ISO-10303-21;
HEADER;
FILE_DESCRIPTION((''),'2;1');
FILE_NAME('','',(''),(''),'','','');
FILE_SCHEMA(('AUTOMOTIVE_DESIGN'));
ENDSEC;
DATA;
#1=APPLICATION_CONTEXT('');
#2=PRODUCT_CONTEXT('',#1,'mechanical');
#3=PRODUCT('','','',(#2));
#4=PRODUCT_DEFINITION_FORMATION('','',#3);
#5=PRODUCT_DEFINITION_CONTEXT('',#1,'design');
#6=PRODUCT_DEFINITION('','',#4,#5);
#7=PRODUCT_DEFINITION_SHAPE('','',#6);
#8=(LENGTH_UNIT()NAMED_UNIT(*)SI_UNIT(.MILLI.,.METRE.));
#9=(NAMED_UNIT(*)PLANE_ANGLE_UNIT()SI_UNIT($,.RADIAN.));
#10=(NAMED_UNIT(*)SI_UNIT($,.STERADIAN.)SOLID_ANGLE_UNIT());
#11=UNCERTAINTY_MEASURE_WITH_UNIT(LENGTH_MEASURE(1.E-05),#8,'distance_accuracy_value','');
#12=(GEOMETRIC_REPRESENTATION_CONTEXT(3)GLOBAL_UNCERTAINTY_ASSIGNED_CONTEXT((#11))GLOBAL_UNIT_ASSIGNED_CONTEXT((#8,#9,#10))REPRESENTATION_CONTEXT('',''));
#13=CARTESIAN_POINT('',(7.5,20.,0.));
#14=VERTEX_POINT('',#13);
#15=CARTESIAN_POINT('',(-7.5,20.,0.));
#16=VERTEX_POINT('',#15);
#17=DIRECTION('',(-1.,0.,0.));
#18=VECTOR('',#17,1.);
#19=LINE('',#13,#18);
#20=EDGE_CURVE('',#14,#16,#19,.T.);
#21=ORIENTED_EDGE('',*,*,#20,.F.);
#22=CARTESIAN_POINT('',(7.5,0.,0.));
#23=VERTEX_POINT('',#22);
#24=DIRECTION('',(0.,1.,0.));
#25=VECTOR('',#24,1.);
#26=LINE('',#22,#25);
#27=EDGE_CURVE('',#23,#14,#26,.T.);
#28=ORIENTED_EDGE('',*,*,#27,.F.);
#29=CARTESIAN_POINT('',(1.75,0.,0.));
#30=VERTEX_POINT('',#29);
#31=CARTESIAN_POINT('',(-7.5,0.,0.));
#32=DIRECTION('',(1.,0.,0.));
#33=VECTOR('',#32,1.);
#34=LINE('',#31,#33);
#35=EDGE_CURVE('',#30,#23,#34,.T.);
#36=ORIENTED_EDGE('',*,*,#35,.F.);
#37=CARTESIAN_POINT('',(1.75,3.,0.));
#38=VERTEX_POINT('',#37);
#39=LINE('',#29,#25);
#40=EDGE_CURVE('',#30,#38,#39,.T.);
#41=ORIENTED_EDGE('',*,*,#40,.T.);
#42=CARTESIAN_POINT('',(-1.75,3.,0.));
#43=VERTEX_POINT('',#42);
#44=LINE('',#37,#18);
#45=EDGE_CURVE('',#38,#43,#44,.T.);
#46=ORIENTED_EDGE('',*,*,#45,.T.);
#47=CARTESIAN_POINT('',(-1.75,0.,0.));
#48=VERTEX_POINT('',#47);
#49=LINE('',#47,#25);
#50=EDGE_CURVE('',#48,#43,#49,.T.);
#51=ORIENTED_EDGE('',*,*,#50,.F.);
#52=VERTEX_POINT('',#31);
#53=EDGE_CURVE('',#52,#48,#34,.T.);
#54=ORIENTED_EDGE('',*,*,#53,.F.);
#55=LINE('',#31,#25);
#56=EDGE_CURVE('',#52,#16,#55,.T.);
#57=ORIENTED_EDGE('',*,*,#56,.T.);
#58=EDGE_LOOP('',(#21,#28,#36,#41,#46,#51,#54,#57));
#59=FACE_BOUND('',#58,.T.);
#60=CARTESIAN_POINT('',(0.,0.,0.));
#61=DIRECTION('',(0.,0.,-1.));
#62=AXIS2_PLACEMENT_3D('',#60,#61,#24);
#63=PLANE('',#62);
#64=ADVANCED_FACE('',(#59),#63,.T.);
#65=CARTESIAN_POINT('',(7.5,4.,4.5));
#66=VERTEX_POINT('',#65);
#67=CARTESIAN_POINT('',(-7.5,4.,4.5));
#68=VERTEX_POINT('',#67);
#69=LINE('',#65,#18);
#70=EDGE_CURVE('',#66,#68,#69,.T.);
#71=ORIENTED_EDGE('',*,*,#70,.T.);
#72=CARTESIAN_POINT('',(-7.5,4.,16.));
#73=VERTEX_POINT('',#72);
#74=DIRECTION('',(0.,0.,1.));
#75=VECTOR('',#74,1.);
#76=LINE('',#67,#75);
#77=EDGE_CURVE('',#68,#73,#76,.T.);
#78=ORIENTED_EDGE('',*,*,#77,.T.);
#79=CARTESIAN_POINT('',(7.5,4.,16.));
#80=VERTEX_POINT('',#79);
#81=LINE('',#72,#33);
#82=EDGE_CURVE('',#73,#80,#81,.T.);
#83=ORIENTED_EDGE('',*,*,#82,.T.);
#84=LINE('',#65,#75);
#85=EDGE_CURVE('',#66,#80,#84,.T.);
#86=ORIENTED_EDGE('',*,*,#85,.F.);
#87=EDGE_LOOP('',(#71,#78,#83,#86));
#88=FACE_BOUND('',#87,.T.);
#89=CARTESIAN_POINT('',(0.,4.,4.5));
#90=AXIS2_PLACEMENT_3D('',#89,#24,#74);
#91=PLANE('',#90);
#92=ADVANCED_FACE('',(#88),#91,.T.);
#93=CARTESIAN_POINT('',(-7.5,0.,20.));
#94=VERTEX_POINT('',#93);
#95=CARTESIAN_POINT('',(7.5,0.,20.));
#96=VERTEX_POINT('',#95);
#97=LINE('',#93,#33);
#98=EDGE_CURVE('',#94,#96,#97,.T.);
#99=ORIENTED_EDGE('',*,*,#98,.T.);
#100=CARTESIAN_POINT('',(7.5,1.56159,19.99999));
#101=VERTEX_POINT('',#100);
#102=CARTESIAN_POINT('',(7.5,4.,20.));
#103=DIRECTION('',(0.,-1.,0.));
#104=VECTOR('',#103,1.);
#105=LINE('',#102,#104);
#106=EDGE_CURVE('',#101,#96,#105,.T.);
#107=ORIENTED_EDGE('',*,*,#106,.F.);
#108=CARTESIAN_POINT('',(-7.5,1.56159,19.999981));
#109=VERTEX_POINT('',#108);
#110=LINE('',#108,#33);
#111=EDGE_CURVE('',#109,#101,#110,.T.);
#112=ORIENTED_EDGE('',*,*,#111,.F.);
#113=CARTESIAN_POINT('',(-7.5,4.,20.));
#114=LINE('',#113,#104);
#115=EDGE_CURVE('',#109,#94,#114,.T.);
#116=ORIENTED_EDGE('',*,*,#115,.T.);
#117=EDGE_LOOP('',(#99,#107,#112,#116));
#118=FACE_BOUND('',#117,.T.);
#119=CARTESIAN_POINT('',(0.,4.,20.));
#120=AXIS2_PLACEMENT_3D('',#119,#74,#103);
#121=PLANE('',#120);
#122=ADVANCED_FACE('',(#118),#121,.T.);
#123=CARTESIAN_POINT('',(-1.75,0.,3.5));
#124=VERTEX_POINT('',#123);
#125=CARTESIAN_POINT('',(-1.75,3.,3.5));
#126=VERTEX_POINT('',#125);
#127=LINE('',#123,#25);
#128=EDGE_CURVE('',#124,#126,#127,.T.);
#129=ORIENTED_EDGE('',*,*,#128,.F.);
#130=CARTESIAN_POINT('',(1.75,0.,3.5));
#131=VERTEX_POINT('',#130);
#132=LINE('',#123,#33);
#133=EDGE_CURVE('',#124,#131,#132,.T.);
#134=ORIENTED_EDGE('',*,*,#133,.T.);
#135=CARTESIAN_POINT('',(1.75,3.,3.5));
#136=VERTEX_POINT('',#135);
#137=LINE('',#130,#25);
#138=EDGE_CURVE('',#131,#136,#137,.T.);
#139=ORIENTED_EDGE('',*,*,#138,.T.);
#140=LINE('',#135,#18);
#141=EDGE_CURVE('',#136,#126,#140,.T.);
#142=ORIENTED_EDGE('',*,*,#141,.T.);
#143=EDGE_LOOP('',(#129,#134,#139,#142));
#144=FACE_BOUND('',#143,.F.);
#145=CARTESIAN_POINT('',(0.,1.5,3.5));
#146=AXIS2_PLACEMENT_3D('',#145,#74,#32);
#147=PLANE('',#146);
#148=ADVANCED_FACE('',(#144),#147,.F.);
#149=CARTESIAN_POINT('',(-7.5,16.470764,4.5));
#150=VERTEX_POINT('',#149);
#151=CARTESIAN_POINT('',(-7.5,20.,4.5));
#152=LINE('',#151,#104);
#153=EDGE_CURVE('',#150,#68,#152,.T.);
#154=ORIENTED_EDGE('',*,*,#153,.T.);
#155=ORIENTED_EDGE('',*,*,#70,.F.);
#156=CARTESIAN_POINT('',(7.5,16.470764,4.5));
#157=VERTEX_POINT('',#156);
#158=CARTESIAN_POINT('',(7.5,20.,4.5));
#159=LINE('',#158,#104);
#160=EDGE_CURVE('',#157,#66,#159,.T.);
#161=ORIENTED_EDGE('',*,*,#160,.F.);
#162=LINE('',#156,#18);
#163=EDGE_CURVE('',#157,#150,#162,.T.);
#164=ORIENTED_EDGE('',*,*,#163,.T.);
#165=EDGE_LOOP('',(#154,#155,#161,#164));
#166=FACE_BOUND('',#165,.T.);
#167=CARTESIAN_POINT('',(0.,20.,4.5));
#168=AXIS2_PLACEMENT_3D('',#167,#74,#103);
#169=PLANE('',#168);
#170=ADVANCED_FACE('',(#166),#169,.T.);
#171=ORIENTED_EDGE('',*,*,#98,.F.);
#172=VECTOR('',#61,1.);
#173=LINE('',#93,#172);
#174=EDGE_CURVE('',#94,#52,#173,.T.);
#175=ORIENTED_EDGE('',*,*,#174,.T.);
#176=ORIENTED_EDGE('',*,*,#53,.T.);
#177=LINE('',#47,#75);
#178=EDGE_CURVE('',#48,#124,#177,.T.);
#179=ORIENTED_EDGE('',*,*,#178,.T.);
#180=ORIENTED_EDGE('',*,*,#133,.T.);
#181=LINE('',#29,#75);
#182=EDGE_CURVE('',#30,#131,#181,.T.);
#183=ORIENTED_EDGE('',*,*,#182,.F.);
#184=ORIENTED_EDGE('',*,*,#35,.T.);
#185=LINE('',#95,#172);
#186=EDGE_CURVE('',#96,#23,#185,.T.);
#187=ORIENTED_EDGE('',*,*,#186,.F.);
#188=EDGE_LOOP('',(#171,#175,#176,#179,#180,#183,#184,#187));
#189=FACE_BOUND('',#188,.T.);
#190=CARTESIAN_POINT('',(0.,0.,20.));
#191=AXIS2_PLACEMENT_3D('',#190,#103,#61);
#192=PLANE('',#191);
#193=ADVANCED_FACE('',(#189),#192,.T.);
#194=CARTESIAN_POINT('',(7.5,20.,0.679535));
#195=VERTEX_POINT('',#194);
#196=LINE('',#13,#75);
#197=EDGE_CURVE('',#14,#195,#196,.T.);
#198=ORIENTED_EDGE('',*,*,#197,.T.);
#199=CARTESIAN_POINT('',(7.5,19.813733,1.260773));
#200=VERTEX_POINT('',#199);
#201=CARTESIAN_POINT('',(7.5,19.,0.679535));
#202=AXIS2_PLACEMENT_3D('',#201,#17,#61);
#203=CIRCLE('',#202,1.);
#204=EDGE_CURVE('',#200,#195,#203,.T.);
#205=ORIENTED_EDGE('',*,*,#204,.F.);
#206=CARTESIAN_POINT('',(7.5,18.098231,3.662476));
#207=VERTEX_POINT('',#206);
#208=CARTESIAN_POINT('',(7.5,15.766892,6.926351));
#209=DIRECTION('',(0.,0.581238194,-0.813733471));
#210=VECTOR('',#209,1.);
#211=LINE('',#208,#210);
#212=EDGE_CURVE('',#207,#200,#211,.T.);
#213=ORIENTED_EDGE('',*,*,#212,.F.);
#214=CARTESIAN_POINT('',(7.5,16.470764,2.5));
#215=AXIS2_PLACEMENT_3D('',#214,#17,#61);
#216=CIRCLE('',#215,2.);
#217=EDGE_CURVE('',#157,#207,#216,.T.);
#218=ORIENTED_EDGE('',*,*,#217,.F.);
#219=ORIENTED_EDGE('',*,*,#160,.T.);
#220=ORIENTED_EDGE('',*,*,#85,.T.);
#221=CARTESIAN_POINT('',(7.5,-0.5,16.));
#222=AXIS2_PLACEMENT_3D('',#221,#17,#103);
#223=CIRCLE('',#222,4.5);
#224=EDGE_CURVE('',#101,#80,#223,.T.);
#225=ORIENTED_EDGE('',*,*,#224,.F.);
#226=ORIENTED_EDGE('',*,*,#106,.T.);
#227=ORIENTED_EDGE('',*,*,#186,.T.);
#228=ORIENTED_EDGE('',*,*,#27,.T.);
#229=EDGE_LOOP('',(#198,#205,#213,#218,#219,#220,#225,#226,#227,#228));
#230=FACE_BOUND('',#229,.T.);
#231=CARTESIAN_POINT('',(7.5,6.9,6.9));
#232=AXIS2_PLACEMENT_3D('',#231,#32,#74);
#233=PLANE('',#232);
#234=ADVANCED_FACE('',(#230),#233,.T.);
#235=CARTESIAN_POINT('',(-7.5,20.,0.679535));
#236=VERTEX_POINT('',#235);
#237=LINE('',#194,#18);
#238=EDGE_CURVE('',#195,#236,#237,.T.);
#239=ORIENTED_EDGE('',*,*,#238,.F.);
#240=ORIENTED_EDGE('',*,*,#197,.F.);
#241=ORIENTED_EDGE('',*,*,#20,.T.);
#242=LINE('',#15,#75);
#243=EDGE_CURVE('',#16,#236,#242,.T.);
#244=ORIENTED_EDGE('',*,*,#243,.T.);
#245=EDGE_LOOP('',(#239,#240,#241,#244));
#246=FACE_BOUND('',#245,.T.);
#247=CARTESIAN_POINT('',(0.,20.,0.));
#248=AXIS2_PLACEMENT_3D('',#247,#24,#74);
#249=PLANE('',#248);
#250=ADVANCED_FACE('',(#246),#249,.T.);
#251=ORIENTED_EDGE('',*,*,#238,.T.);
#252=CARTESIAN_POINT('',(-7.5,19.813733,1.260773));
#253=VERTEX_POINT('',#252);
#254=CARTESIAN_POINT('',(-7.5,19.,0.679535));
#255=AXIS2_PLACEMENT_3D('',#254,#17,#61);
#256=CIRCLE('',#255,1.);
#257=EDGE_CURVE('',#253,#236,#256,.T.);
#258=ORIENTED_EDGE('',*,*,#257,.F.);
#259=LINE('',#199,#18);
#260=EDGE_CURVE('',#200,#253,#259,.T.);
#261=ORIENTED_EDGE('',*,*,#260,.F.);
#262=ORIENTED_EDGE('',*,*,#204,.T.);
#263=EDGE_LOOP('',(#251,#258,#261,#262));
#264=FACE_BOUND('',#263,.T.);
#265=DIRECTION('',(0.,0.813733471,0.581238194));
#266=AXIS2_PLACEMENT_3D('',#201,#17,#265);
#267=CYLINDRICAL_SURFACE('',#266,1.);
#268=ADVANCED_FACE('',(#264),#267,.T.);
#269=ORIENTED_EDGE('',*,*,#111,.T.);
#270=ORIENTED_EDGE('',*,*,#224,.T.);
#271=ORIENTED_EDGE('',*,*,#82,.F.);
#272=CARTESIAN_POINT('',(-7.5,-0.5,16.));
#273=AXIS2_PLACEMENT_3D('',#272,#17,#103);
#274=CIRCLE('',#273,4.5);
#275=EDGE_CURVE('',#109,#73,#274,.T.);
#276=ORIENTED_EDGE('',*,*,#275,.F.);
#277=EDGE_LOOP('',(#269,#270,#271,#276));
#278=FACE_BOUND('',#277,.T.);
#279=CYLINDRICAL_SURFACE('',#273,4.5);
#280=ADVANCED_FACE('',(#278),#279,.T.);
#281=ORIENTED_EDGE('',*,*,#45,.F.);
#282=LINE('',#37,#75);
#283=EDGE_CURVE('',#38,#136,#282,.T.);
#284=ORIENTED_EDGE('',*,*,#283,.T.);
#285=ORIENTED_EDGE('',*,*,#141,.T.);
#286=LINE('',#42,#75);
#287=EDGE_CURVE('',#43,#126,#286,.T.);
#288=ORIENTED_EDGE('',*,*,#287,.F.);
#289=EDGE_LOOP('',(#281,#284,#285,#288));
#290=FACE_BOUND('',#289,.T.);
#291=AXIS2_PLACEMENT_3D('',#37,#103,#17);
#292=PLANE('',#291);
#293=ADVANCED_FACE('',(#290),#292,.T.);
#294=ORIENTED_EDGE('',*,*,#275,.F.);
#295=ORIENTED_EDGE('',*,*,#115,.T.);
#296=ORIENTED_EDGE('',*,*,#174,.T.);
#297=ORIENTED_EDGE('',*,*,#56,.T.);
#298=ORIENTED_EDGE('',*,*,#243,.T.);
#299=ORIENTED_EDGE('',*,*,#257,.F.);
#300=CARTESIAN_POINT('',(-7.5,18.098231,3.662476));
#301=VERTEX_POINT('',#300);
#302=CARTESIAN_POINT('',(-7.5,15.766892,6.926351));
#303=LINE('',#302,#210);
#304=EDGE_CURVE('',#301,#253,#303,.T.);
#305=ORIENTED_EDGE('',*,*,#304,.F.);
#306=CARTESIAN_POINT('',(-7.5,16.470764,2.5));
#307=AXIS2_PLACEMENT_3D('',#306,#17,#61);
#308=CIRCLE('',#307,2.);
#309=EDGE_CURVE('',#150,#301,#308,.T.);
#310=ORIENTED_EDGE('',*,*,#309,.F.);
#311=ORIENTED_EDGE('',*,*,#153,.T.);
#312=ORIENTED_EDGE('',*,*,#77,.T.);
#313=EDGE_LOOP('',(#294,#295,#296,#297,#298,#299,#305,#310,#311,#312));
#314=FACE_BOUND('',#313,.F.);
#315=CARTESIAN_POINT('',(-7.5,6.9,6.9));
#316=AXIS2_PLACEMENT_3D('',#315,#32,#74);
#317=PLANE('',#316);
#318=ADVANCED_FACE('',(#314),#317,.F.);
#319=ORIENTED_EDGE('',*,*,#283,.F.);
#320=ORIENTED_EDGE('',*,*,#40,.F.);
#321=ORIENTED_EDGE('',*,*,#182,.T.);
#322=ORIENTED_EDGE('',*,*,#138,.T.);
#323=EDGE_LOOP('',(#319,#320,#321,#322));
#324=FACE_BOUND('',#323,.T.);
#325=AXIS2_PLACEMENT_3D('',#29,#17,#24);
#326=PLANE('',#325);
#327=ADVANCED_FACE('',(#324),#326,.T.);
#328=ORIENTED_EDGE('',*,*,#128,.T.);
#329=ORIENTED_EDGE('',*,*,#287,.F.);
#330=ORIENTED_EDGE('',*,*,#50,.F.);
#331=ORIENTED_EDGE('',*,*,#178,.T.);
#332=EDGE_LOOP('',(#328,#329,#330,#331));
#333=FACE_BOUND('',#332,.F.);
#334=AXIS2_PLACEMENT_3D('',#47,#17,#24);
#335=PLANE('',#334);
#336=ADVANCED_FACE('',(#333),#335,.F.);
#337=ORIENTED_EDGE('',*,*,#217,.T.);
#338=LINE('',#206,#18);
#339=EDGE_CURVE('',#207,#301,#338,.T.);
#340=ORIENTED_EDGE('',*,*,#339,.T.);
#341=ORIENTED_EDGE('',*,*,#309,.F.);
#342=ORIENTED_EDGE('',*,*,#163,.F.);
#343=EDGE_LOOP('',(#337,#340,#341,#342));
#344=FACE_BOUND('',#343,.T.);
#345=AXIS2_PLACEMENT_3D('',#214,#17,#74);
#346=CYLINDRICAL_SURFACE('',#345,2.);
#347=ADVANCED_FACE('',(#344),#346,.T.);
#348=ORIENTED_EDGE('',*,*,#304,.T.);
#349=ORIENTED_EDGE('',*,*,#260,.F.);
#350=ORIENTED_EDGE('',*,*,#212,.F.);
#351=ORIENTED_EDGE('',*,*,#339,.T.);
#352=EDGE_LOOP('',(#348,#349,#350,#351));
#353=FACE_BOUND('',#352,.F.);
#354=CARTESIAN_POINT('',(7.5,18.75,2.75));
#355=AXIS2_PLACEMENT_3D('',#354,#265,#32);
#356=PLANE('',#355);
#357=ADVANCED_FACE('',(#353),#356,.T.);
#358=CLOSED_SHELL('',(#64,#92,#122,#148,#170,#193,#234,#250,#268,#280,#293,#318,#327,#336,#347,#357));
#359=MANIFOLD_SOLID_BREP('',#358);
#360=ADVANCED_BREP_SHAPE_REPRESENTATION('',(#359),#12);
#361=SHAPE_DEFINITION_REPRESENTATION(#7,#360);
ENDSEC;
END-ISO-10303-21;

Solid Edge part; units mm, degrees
sketch "Sketch1" plane through (0, 0, 0) normal (-1, 0, 0) x (0, -1, 0)
  line L0 (-4, 4.5) -> (-4, 20)
  line L1 (-4, 20) -> (0, 20)
  line L2 (0, 20) -> (0, 0)
  line L3 (0, 0) -> (-20, 0)
  line L4 (-20, 0) -> (-20, 4.5)
  line L5 (-20, 4.5) -> (-4, 4.5)
extrude "Protrusion1" add sketch "Sketch1" along normal mid plane 15
sketch "Sketch2" plane through (0, 10, 0) normal (0, 0, -1) x (0, -1, 0)
  line L0 (10, -1.75) -> (7, -1.75)
  line L1 (10, 1.75) -> (10, -1.75)
  line L2 (10, 1.75) -> (7, 1.75)
  line L3 (7, -1.75) -> (7, 1.75)
extrude "ExtrudedCutout_1" cut sketch "Sketch2" against normal blind 3.5
chamfer "Chamfer_1" distance 2.5 distance2 3.5 1 edges at (0, 20, 4.5) measured on face at (-4.85, 17.4933, 4.5)
sketch "Sketch3" plane through (-7.5, 11, 10) normal (-1, 0, 0) x (0, -1, 0)
  line L0 (7, 6) -> (7, 10)
  line L1 (7, 10) -> (9.4384, 10)
  arc A0 (9.4384, 10) -> (7, 6) centre (11.5, 6) ccw
extrude "Cutout1" cut sketch "Sketch3" against normal through all
fillet "Round_1" radius 2 1 edges at (0, 17.5, 4.5)
fillet "Round_2" radius 1 1 edges at (0, 20, 1)
properties material "POM"
